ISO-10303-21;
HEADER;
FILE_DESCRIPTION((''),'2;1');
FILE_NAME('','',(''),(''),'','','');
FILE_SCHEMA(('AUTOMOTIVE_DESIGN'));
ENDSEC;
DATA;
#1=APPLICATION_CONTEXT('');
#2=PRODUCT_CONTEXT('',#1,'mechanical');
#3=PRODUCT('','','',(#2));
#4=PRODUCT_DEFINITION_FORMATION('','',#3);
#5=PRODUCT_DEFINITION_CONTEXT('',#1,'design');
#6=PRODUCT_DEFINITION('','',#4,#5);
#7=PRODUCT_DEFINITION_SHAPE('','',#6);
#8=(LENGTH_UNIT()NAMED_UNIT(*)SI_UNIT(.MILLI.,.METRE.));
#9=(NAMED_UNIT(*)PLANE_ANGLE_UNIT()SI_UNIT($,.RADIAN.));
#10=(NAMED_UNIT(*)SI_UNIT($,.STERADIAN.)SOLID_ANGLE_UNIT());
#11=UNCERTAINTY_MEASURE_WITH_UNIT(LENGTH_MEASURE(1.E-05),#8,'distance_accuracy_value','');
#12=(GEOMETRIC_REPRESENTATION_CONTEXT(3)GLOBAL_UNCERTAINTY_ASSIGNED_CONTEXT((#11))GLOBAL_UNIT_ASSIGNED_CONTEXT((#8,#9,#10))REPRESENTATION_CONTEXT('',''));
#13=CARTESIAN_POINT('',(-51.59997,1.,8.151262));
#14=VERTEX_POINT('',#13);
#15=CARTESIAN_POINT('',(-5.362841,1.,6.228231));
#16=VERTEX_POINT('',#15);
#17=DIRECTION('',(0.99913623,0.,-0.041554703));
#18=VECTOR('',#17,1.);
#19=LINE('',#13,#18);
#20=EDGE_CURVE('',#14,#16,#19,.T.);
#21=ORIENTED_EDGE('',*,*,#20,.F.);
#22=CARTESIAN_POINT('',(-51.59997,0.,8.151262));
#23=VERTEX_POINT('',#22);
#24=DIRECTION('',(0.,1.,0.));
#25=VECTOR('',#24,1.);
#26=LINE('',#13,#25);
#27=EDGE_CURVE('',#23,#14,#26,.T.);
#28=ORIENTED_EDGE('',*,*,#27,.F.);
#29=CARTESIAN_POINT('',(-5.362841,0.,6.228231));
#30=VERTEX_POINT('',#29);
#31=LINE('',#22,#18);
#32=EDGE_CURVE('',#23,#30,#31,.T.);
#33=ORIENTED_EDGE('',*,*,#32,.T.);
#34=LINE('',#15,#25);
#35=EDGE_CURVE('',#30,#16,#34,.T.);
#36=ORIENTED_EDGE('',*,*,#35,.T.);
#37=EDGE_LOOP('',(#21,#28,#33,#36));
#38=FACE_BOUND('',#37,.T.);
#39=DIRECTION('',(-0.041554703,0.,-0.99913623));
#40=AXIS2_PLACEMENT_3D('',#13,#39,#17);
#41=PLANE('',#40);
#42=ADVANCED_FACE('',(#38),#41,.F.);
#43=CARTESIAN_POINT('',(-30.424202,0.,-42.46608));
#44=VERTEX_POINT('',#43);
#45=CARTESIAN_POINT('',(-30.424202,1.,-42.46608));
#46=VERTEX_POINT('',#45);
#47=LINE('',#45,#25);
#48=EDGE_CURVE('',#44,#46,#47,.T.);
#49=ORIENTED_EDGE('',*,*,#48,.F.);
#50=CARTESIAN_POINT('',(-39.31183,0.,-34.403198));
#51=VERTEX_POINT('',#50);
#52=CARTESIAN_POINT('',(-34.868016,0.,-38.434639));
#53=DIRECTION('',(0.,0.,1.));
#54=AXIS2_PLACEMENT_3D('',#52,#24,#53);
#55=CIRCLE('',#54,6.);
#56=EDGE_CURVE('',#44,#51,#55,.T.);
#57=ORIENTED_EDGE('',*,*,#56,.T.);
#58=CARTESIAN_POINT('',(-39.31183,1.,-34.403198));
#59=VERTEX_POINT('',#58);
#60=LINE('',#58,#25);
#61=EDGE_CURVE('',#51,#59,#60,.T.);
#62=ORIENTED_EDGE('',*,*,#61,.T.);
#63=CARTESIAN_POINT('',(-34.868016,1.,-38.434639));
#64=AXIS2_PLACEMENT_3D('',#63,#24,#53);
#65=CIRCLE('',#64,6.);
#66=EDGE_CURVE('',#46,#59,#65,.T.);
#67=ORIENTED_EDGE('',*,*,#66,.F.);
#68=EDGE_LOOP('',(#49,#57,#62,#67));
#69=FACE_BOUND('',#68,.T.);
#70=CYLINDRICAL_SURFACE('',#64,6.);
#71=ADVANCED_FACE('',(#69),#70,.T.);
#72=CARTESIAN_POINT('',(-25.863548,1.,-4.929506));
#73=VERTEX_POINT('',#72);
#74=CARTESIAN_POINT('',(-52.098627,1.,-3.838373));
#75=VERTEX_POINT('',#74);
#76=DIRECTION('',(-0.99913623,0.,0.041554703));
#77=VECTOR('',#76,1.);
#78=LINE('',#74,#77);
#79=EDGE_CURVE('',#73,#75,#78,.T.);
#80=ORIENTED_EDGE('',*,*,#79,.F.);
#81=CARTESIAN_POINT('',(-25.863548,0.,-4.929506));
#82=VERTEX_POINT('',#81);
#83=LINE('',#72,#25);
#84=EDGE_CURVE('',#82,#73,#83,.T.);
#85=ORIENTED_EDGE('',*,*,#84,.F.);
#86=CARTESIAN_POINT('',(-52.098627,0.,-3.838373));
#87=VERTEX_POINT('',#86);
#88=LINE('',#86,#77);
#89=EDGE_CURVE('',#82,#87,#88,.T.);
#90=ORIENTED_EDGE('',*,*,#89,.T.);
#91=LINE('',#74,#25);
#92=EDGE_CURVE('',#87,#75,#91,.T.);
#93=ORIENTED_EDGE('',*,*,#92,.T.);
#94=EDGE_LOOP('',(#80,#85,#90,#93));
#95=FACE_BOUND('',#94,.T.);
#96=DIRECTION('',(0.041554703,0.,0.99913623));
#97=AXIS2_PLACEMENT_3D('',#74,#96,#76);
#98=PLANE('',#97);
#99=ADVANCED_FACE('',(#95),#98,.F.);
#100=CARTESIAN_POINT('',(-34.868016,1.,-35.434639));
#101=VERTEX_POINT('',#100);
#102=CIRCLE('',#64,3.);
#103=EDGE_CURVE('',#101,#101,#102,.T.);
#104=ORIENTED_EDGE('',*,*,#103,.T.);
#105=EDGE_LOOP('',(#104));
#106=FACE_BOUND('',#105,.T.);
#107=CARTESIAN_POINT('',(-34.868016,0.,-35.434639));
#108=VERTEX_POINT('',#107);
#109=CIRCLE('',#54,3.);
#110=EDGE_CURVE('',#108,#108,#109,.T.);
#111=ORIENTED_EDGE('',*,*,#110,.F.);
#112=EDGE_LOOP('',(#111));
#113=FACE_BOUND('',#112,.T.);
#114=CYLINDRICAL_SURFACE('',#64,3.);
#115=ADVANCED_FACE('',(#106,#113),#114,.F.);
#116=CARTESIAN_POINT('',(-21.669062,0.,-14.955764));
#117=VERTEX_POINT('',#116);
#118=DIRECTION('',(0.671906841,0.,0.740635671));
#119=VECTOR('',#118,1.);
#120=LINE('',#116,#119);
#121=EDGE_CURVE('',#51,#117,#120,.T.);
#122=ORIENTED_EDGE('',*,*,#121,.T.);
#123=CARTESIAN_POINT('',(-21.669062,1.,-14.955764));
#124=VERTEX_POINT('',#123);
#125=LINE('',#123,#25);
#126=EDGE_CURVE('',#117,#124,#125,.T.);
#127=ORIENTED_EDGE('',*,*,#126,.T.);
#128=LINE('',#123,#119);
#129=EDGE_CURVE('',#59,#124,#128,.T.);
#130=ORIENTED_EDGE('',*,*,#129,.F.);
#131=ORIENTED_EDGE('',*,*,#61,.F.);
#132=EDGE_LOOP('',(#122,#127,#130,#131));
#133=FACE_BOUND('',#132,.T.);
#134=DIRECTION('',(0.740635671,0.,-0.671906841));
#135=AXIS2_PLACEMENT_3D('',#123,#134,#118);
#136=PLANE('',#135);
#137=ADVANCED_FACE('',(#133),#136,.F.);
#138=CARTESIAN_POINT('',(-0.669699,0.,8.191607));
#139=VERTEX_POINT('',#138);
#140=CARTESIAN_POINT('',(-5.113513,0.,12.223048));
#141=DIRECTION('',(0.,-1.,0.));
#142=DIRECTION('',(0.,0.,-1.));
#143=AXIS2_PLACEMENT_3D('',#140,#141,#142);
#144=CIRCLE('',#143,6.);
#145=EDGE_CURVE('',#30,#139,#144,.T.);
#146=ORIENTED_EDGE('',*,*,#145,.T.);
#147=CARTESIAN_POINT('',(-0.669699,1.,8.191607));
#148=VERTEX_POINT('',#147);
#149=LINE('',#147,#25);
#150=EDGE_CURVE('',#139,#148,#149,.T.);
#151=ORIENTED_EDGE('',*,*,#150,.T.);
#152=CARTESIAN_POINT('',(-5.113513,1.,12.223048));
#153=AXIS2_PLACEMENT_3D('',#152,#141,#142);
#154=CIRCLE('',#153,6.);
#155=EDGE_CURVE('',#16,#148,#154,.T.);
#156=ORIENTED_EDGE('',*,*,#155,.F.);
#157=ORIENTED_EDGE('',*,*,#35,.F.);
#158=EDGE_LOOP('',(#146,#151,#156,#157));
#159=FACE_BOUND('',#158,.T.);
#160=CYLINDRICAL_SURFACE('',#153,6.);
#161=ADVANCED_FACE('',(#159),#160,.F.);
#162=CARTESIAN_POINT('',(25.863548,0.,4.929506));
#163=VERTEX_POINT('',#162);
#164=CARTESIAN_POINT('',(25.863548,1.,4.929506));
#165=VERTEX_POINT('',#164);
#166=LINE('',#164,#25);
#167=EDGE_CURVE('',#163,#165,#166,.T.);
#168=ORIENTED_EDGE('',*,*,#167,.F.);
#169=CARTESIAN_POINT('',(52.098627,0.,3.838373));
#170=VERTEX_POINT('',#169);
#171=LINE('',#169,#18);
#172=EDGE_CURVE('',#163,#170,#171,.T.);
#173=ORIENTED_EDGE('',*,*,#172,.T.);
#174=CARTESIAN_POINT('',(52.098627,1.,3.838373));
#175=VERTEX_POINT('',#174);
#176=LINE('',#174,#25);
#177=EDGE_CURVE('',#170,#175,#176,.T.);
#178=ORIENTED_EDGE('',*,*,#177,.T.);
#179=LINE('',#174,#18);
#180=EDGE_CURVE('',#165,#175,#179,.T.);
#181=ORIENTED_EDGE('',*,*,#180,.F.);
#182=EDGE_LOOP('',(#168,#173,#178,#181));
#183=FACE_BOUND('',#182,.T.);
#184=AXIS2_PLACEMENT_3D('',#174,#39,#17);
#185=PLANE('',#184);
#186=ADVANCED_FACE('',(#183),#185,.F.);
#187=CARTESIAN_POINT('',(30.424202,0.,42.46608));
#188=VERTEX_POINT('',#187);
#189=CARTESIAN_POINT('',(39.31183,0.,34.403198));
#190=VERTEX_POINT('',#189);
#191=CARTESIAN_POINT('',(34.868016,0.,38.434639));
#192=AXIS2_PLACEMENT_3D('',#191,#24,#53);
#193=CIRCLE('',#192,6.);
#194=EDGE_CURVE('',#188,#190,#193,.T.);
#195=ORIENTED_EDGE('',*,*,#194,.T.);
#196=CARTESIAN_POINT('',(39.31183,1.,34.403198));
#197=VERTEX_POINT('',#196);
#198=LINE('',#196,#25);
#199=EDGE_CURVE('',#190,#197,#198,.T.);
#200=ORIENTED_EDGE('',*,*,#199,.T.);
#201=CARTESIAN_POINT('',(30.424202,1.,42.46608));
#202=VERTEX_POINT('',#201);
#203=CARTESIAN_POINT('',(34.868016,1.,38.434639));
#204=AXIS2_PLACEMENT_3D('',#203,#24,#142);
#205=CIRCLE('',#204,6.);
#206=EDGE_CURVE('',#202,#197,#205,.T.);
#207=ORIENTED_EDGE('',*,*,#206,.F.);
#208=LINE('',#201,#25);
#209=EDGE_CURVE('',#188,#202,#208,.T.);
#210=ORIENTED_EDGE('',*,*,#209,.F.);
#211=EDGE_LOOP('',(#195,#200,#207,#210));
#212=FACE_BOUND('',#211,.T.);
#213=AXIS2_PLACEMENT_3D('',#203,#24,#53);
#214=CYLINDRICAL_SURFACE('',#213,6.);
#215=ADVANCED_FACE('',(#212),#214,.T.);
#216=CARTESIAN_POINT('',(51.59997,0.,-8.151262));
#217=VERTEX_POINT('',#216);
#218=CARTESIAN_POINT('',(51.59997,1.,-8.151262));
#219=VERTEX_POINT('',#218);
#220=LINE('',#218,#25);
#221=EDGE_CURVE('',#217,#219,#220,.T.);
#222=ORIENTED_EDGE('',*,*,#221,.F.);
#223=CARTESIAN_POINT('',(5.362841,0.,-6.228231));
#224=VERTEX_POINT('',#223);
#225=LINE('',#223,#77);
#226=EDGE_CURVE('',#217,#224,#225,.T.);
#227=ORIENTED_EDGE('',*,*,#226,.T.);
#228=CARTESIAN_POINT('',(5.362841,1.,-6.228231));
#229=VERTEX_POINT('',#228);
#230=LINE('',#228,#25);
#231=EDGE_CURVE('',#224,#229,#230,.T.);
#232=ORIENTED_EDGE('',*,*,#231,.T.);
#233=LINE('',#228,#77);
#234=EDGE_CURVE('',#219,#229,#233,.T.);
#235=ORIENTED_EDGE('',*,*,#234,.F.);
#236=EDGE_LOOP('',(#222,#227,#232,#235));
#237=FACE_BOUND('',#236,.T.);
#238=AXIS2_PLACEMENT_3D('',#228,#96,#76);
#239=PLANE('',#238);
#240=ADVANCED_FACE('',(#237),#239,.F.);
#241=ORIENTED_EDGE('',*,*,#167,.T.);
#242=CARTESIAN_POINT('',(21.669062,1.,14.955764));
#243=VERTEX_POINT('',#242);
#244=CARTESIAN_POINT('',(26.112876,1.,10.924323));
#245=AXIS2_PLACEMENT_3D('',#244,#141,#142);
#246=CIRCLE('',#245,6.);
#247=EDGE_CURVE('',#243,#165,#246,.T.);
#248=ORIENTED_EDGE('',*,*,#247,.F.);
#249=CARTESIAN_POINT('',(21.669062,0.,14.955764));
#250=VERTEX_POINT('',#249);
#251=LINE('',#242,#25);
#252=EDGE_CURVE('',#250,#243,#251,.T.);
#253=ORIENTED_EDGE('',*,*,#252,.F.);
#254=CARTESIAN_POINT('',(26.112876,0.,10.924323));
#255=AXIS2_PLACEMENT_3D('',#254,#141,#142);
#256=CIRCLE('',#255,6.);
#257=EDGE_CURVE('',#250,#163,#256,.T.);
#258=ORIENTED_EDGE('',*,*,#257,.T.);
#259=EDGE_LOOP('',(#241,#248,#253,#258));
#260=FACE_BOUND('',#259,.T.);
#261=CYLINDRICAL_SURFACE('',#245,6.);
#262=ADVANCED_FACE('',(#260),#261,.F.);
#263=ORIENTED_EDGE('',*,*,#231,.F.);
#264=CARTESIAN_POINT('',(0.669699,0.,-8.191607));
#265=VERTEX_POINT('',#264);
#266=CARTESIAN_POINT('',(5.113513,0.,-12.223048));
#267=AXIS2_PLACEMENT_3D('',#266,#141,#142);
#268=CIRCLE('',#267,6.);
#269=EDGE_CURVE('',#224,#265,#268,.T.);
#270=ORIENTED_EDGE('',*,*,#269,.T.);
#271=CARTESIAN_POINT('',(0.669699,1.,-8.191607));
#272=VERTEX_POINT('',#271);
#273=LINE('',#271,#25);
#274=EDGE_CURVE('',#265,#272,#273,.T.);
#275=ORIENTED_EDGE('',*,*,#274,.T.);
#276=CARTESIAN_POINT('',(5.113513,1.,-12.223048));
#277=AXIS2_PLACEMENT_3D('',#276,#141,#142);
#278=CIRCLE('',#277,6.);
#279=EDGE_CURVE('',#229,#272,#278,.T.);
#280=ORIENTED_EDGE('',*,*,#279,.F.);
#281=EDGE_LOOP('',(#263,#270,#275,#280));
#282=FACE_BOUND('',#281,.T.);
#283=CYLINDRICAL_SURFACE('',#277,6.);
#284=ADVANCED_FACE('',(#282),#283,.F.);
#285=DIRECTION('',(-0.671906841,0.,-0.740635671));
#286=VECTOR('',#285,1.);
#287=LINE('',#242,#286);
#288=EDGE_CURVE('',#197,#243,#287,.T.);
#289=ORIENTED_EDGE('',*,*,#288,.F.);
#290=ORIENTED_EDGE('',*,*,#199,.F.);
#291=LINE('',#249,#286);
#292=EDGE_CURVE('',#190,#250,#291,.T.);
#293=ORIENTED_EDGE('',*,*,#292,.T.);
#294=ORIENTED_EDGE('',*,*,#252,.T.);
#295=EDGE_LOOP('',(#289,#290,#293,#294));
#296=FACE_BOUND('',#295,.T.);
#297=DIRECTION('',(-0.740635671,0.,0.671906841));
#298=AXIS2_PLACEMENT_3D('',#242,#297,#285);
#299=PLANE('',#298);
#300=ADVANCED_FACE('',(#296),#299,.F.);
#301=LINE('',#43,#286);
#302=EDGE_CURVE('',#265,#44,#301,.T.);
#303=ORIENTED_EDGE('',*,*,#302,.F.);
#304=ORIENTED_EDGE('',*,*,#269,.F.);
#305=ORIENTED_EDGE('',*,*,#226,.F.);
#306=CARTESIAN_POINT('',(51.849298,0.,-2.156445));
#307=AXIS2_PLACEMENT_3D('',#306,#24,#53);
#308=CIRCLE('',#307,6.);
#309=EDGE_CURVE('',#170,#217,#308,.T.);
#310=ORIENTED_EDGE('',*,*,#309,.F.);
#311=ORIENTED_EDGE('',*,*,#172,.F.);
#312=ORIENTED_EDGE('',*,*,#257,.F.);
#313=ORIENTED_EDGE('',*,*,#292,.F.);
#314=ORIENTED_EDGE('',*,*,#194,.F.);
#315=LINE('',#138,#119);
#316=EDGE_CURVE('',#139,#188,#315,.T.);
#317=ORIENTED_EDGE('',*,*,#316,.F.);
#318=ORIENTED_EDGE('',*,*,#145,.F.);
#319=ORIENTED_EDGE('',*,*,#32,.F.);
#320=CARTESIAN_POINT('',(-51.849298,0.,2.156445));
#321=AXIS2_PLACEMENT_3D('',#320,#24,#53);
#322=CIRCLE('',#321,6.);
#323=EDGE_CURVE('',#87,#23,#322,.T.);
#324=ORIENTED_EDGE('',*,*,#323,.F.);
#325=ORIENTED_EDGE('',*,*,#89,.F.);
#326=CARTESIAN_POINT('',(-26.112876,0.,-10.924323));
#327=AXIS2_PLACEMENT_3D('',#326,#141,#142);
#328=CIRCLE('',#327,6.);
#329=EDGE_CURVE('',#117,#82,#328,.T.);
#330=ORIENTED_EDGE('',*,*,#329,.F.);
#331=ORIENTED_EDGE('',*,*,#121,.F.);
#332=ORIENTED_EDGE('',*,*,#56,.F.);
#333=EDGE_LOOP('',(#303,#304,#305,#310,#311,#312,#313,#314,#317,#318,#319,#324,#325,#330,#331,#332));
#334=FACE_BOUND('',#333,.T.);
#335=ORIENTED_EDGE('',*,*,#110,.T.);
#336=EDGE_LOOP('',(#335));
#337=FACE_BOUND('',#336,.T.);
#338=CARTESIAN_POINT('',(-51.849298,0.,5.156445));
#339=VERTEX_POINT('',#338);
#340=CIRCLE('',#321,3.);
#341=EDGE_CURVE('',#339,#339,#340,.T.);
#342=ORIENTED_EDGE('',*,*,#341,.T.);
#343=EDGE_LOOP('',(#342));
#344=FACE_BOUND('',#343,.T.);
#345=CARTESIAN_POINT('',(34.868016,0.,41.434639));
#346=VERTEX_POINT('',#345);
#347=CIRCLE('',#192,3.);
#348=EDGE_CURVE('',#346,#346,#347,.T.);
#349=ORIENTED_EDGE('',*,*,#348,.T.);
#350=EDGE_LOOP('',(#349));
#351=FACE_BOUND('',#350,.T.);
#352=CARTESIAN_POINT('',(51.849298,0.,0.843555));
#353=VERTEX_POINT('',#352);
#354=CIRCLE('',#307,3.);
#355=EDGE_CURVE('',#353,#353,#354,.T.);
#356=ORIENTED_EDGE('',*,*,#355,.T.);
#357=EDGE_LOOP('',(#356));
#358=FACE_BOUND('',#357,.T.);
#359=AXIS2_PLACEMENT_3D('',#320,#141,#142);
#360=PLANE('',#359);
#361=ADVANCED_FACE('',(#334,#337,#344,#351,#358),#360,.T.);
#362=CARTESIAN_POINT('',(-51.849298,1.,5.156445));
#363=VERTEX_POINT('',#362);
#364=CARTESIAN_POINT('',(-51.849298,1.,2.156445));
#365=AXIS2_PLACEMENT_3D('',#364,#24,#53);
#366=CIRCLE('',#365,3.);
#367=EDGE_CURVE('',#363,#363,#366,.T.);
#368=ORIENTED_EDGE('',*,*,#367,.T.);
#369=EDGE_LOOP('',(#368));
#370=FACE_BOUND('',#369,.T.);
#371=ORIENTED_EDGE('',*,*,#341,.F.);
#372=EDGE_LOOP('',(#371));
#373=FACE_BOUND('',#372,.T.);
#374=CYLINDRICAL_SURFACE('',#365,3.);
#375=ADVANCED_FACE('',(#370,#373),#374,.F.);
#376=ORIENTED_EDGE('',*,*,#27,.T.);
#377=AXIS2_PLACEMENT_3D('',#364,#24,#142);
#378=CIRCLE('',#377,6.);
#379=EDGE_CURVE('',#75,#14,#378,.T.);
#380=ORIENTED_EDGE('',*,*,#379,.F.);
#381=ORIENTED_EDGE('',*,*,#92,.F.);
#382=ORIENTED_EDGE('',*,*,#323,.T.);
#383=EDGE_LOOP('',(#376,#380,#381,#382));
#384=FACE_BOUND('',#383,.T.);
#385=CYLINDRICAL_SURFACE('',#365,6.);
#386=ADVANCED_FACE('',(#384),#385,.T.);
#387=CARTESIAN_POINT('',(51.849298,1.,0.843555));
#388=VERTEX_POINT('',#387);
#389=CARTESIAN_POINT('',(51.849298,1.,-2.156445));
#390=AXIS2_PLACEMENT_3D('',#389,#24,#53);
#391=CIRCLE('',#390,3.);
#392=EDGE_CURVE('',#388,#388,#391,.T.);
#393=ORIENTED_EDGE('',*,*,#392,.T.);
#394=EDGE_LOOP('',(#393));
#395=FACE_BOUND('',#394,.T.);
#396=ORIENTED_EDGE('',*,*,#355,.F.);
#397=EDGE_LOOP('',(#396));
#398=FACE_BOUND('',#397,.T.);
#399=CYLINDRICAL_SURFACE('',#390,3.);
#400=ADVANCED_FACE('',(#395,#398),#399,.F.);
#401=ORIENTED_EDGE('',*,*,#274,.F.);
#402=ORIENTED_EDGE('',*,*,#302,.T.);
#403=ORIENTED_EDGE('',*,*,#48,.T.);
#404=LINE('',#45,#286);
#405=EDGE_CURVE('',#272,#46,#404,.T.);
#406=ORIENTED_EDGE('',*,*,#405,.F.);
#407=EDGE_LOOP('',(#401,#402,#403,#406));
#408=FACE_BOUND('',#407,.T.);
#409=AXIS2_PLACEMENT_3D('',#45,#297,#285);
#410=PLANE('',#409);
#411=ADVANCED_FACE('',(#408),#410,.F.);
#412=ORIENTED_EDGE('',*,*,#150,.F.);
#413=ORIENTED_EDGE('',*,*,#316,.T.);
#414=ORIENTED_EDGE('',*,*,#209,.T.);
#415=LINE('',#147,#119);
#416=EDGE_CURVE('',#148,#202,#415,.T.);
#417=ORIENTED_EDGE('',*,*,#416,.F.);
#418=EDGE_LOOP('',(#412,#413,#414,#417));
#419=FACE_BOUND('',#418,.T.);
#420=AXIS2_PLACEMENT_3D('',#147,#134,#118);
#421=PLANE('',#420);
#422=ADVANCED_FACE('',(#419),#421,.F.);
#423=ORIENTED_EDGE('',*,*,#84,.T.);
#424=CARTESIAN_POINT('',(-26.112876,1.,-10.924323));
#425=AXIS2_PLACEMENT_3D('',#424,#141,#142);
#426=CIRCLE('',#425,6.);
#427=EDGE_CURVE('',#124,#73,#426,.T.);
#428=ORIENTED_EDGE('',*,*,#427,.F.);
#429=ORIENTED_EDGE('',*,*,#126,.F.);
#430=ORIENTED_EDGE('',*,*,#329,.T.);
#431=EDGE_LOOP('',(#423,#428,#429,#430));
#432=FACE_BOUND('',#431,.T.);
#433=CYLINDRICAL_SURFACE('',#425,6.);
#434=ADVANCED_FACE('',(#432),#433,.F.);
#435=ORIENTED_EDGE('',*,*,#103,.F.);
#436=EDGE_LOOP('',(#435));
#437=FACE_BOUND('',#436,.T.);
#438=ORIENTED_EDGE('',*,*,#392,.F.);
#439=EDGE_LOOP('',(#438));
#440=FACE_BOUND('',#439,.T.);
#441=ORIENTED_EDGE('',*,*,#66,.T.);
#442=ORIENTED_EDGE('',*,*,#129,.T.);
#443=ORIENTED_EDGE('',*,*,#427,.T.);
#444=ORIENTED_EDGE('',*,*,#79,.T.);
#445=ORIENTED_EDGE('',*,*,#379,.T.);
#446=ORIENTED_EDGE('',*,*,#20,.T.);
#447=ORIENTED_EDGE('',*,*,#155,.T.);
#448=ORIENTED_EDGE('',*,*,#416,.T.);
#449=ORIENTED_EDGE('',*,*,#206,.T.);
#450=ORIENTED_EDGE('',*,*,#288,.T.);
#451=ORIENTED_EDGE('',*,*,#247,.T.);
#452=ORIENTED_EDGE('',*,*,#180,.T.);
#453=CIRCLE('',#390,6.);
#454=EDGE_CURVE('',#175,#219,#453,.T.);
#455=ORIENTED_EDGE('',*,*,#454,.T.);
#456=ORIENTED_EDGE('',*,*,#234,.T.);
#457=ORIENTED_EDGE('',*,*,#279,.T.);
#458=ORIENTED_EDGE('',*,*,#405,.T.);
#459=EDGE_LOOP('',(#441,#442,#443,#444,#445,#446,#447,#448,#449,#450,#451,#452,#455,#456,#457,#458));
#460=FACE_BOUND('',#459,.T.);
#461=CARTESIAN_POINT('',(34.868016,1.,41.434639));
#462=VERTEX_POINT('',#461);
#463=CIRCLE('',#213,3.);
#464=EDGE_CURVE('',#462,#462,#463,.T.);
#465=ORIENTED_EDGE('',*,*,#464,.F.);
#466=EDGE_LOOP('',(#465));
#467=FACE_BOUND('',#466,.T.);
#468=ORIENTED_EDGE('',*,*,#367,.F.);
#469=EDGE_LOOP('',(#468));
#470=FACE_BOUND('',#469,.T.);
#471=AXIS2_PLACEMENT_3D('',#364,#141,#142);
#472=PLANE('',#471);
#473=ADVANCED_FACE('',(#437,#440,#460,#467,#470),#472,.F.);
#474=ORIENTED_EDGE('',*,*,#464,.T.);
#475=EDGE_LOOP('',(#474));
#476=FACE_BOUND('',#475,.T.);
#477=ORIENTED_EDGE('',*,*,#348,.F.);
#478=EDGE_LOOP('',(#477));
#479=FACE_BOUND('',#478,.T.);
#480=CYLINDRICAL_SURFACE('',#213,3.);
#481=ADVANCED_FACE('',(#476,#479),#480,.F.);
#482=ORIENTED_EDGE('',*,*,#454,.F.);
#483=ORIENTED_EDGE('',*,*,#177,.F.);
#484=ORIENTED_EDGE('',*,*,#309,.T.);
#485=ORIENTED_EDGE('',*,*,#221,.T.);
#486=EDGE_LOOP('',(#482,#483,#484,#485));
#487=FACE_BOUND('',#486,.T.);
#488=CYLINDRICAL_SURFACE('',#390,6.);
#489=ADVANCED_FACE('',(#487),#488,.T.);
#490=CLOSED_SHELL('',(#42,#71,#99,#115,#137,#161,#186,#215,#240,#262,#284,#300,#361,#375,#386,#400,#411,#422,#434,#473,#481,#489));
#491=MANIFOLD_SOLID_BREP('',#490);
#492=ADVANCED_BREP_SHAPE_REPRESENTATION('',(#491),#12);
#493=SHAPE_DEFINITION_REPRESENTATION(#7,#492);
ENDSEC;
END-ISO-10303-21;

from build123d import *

# Parameters (mm, degrees)
SKETCH1_R           = 3
BOSS_EXTRUDE1_DEPTH = 1


with BuildPart() as part:
    # Sketch1 → Boss-Extrude1 (new body)
    with BuildSketch(Plane(origin=(0, 0, 0), x_dir=(1, 0, 0), z_dir=(0, 1, 0))):
        with BuildLine():
            Line((-51.59997019, -8.15126226), (-5.362841244, -6.228231034))
            ThreePointArc((-5.362841244, -6.228231034), (-2.79788364, -6.687900671), (-0.669699001, -8.191607368))
            Line((-0.669699001, -8.191607368), (30.424202227, -42.466079626))
            ThreePointArc((30.424202227, -42.466079626), (38.899457299, -42.878452603), (39.311830275, -34.403197532))
            Line((39.311830275, -34.403197532), (21.669062136, -14.955764328))
            ThreePointArc((21.669062136, -14.955764328), (20.577728416, -8.608693896), (25.863547941, -4.929505899))
            Line((25.863547941, -4.929505899), (52.098626628, -3.838372503))
            ThreePointArc((52.098626628, -3.838372503), (57.84411579, 2.405773098), (51.59997019, 8.15126226))
            Line((51.59997019, 8.15126226), (5.362841244, 6.228231034))
            ThreePointArc((5.362841244, 6.228231034), (2.79788364, 6.687900671), (0.669699001, 8.191607368))
            Line((0.669699001, 8.191607368), (-30.424202227, 42.466079626))
            ThreePointArc((-30.424202227, 42.466079626), (-38.899457299, 42.878452603), (-39.311830275, 34.403197532))
            Line((-39.311830275, 34.403197532), (-21.669062136, 14.955764328))
            ThreePointArc((-21.669062136, 14.955764328), (-20.577728416, 8.608693896), (-25.863547941, 4.929505899))
            Line((-25.863547941, 4.929505899), (-52.098626628, 3.838372503))
            ThreePointArc((-52.098626628, 3.838372503), (-57.84411579, -2.405773098), (-51.59997019, -8.15126226))
        make_face()
        with Locations(Location((-34.868016251, 38.434638579, 0), (0, 0, 270))):
            Circle(SKETCH1_R, mode=Mode.SUBTRACT)
        with Locations(Location((51.849298409, 2.156444879, 0), (0, 0, 270))):
            Circle(SKETCH1_R, mode=Mode.SUBTRACT)
        with Locations(Location((34.868016251, -38.434638579, 0), (0, 0, 270))):
            Circle(SKETCH1_R, mode=Mode.SUBTRACT)
        with Locations(Location((-51.849298409, -2.156444879, 0), (0, 0, 270))):
            Circle(SKETCH1_R, mode=Mode.SUBTRACT)
    extrude(amount=BOSS_EXTRUDE1_DEPTH)


solid = part.part
